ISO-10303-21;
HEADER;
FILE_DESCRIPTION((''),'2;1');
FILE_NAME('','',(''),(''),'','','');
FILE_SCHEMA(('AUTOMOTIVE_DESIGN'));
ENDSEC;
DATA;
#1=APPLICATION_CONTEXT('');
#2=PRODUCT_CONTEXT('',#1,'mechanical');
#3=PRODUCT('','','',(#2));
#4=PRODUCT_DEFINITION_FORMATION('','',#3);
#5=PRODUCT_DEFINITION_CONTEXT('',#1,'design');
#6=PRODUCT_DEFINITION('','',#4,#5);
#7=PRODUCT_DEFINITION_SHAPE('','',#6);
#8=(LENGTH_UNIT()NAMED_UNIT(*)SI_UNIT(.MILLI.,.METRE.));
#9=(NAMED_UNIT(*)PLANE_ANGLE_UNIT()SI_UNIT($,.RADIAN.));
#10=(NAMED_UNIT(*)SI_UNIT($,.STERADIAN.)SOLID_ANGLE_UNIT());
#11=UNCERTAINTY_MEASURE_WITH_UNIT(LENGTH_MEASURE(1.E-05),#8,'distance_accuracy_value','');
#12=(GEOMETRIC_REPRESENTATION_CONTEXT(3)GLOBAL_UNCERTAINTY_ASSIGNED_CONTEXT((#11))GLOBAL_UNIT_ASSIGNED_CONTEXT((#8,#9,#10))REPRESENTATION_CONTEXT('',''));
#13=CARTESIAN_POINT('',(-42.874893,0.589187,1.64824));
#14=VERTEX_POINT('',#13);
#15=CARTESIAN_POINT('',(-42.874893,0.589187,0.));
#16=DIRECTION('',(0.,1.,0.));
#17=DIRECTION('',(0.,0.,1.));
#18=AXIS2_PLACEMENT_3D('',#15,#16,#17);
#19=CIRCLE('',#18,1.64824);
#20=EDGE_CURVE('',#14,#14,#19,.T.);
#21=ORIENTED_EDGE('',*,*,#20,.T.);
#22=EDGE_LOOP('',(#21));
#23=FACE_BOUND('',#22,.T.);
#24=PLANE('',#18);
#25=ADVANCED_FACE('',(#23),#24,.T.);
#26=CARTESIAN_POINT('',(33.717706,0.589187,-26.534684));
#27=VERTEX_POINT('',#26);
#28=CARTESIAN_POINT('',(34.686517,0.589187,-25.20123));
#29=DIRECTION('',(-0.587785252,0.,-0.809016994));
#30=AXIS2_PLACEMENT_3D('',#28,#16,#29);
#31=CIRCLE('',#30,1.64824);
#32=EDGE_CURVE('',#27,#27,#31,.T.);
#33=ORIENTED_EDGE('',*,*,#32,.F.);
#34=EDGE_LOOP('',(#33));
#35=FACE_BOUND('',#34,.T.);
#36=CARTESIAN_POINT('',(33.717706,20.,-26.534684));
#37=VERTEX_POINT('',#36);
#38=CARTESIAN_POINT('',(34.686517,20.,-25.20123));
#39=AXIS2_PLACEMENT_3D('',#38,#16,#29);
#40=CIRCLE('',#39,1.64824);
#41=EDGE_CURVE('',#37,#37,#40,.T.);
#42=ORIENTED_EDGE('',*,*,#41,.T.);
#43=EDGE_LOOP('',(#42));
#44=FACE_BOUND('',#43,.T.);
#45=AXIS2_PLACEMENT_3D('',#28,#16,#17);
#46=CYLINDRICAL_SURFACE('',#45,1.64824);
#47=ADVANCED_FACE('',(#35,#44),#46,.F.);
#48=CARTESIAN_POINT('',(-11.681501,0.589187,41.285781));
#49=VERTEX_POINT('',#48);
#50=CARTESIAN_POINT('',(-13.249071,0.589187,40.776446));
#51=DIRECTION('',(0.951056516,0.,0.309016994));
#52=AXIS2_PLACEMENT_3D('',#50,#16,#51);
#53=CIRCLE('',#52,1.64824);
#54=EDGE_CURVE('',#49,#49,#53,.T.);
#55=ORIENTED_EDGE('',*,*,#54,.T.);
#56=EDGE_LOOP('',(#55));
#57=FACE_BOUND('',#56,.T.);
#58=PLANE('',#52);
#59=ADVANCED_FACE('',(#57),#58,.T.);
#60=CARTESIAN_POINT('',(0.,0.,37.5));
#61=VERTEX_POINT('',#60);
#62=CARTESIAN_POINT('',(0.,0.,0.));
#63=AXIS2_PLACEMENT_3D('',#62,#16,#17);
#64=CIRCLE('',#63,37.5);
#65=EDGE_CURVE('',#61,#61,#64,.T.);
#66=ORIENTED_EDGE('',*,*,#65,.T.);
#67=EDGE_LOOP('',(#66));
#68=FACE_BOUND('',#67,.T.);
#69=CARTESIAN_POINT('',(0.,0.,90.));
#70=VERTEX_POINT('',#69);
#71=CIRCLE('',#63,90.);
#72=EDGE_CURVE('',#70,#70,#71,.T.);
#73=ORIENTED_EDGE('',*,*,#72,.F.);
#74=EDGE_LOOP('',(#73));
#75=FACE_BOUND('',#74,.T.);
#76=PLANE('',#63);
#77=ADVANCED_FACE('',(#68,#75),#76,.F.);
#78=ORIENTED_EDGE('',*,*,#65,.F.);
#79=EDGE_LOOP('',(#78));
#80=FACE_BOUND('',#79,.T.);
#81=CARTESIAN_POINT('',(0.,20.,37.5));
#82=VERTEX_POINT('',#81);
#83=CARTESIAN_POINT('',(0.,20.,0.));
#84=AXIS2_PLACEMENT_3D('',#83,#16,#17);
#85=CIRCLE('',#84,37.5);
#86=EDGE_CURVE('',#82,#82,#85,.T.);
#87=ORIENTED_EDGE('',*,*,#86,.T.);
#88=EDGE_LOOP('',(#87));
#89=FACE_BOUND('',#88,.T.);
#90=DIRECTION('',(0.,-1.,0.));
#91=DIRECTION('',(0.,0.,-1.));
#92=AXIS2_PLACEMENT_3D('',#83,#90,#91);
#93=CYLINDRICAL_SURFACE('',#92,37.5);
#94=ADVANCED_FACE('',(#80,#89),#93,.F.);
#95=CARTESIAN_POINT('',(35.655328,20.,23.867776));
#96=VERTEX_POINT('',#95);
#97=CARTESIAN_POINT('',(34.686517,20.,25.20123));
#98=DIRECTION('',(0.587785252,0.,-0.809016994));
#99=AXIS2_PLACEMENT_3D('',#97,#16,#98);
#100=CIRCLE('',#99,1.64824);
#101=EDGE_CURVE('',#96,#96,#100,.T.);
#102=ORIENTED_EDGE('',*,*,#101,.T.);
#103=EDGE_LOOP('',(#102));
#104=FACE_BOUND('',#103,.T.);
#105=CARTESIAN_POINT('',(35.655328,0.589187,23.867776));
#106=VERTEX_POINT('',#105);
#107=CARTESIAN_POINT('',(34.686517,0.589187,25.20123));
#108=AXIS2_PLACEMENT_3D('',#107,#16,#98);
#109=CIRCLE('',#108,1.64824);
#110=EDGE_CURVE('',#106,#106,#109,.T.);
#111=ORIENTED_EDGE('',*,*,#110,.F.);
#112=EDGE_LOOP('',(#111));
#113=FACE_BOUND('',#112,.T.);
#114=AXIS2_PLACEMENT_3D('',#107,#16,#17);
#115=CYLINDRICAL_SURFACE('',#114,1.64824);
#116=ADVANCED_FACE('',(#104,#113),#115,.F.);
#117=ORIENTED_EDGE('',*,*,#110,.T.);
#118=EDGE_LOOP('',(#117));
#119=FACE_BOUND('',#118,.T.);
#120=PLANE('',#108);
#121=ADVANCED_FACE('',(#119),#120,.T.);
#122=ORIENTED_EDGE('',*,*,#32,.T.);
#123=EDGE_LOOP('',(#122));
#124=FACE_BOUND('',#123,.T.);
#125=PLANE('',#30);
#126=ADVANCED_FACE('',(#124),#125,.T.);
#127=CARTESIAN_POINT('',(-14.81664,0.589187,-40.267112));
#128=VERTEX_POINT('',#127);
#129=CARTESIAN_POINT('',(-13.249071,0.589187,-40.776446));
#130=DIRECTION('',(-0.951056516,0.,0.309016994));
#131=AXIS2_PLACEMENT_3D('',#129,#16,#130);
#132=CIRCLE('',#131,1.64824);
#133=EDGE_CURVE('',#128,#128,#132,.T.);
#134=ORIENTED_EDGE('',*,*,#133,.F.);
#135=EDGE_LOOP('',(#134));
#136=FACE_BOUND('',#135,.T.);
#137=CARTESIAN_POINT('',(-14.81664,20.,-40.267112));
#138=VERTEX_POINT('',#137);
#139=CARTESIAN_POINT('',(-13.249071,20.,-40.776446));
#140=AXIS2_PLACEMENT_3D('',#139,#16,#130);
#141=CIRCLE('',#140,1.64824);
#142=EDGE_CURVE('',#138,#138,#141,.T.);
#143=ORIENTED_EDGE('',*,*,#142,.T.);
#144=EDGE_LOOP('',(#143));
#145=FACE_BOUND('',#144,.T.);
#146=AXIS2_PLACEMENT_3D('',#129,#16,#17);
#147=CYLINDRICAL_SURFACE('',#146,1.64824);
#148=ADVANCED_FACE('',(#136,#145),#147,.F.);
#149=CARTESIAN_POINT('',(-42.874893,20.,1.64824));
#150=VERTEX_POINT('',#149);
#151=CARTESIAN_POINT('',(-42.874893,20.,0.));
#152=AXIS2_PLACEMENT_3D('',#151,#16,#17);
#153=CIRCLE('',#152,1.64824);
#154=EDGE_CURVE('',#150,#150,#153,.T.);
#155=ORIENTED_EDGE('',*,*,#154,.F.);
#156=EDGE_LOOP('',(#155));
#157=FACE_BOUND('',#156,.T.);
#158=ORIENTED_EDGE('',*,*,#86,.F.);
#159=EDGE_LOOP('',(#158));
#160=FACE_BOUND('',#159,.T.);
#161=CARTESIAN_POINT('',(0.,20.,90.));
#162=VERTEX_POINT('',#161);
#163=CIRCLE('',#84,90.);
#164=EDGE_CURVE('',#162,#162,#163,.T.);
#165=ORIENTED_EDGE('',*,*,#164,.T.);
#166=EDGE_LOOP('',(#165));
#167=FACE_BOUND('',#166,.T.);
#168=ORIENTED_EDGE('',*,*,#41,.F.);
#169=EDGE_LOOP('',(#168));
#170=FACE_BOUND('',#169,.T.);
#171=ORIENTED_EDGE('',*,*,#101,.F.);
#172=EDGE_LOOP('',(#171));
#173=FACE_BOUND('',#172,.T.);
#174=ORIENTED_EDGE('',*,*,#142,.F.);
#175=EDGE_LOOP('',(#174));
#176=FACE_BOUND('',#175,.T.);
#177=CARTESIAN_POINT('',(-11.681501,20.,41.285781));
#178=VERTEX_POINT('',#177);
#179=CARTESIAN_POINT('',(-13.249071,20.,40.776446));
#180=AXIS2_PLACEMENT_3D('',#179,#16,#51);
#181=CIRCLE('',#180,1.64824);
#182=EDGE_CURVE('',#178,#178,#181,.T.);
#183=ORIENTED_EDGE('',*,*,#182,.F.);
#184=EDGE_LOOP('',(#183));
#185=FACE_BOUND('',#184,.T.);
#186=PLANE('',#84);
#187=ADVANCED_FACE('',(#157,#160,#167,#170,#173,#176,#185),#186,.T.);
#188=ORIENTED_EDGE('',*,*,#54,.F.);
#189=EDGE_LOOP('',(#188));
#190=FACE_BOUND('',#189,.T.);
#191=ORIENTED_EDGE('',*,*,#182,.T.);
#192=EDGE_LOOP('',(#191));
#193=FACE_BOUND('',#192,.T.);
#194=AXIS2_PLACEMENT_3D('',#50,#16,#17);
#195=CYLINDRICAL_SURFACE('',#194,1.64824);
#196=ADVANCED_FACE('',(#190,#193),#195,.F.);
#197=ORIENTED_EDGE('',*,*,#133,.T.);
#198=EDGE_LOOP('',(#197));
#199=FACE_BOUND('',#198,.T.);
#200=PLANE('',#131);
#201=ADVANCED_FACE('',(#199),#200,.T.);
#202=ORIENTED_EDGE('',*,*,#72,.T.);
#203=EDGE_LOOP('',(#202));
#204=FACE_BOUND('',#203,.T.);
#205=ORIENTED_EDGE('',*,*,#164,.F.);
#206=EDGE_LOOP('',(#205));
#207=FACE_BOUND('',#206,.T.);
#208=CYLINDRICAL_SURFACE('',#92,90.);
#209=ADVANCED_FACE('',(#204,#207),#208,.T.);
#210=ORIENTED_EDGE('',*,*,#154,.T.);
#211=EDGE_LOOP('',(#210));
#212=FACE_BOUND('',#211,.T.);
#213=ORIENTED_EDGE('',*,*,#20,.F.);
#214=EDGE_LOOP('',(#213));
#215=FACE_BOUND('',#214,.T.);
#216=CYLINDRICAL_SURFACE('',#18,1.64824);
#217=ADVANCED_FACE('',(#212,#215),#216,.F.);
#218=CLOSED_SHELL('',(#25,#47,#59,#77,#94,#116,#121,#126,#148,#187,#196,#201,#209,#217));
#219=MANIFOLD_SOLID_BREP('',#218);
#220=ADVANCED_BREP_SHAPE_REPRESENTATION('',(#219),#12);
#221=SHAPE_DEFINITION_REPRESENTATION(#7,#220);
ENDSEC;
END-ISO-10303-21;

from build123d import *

# Parameters (mm, degrees)
SKETCH1_R           = 90
BOSS_EXTRUDE1_DEPTH = 20
SKETCH2_R           = 37.5
CUT_EXTRUDE1_DEPTH  = 129.840987267
SKETCH3_R           = 1.648240031
CUT_EXTRUDE2_DEPTH  = 19.410813467
CIRPATTERN1_COUNT   = 5


with BuildPart() as part:
    # Sketch1 → Boss-Extrude1 (new body)
    with BuildSketch(Plane(origin=(0, 0, 0), x_dir=(1, 0, 0), z_dir=(0, 1, 0))):
        Circle(SKETCH1_R)
    extrude(amount=BOSS_EXTRUDE1_DEPTH)

    # Sketch2 → Cut-Extrude1 (cut, through all)
    with BuildSketch(Plane(origin=(0, 0, 0), x_dir=(1, 0, 0), z_dir=(0, 1, 0))):
        Circle(SKETCH2_R)
    extrude(amount=CUT_EXTRUDE1_DEPTH, mode=Mode.SUBTRACT)

    # Sketch3 → Cut-Extrude2 (cut)
    with BuildSketch(Plane(origin=(0, 20, 0), x_dir=(1, 0, 0), z_dir=(0, 1, 0))):
        with Locations((-42.874892995, 0)):
            Circle(SKETCH3_R)
    cut_extrude2 = extrude(amount=-CUT_EXTRUDE2_DEPTH, mode=Mode.SUBTRACT)

    # CirPattern1: Cut-Extrude2 ×5 about axis
    cirpattern1_axis = Axis((0, 0, 0), (0, 1, 0))
    for i in range(1, CIRPATTERN1_COUNT):
        add(cut_extrude2.rotate(cirpattern1_axis, i * 360 / CIRPATTERN1_COUNT), mode=Mode.SUBTRACT)


solid = part.part
